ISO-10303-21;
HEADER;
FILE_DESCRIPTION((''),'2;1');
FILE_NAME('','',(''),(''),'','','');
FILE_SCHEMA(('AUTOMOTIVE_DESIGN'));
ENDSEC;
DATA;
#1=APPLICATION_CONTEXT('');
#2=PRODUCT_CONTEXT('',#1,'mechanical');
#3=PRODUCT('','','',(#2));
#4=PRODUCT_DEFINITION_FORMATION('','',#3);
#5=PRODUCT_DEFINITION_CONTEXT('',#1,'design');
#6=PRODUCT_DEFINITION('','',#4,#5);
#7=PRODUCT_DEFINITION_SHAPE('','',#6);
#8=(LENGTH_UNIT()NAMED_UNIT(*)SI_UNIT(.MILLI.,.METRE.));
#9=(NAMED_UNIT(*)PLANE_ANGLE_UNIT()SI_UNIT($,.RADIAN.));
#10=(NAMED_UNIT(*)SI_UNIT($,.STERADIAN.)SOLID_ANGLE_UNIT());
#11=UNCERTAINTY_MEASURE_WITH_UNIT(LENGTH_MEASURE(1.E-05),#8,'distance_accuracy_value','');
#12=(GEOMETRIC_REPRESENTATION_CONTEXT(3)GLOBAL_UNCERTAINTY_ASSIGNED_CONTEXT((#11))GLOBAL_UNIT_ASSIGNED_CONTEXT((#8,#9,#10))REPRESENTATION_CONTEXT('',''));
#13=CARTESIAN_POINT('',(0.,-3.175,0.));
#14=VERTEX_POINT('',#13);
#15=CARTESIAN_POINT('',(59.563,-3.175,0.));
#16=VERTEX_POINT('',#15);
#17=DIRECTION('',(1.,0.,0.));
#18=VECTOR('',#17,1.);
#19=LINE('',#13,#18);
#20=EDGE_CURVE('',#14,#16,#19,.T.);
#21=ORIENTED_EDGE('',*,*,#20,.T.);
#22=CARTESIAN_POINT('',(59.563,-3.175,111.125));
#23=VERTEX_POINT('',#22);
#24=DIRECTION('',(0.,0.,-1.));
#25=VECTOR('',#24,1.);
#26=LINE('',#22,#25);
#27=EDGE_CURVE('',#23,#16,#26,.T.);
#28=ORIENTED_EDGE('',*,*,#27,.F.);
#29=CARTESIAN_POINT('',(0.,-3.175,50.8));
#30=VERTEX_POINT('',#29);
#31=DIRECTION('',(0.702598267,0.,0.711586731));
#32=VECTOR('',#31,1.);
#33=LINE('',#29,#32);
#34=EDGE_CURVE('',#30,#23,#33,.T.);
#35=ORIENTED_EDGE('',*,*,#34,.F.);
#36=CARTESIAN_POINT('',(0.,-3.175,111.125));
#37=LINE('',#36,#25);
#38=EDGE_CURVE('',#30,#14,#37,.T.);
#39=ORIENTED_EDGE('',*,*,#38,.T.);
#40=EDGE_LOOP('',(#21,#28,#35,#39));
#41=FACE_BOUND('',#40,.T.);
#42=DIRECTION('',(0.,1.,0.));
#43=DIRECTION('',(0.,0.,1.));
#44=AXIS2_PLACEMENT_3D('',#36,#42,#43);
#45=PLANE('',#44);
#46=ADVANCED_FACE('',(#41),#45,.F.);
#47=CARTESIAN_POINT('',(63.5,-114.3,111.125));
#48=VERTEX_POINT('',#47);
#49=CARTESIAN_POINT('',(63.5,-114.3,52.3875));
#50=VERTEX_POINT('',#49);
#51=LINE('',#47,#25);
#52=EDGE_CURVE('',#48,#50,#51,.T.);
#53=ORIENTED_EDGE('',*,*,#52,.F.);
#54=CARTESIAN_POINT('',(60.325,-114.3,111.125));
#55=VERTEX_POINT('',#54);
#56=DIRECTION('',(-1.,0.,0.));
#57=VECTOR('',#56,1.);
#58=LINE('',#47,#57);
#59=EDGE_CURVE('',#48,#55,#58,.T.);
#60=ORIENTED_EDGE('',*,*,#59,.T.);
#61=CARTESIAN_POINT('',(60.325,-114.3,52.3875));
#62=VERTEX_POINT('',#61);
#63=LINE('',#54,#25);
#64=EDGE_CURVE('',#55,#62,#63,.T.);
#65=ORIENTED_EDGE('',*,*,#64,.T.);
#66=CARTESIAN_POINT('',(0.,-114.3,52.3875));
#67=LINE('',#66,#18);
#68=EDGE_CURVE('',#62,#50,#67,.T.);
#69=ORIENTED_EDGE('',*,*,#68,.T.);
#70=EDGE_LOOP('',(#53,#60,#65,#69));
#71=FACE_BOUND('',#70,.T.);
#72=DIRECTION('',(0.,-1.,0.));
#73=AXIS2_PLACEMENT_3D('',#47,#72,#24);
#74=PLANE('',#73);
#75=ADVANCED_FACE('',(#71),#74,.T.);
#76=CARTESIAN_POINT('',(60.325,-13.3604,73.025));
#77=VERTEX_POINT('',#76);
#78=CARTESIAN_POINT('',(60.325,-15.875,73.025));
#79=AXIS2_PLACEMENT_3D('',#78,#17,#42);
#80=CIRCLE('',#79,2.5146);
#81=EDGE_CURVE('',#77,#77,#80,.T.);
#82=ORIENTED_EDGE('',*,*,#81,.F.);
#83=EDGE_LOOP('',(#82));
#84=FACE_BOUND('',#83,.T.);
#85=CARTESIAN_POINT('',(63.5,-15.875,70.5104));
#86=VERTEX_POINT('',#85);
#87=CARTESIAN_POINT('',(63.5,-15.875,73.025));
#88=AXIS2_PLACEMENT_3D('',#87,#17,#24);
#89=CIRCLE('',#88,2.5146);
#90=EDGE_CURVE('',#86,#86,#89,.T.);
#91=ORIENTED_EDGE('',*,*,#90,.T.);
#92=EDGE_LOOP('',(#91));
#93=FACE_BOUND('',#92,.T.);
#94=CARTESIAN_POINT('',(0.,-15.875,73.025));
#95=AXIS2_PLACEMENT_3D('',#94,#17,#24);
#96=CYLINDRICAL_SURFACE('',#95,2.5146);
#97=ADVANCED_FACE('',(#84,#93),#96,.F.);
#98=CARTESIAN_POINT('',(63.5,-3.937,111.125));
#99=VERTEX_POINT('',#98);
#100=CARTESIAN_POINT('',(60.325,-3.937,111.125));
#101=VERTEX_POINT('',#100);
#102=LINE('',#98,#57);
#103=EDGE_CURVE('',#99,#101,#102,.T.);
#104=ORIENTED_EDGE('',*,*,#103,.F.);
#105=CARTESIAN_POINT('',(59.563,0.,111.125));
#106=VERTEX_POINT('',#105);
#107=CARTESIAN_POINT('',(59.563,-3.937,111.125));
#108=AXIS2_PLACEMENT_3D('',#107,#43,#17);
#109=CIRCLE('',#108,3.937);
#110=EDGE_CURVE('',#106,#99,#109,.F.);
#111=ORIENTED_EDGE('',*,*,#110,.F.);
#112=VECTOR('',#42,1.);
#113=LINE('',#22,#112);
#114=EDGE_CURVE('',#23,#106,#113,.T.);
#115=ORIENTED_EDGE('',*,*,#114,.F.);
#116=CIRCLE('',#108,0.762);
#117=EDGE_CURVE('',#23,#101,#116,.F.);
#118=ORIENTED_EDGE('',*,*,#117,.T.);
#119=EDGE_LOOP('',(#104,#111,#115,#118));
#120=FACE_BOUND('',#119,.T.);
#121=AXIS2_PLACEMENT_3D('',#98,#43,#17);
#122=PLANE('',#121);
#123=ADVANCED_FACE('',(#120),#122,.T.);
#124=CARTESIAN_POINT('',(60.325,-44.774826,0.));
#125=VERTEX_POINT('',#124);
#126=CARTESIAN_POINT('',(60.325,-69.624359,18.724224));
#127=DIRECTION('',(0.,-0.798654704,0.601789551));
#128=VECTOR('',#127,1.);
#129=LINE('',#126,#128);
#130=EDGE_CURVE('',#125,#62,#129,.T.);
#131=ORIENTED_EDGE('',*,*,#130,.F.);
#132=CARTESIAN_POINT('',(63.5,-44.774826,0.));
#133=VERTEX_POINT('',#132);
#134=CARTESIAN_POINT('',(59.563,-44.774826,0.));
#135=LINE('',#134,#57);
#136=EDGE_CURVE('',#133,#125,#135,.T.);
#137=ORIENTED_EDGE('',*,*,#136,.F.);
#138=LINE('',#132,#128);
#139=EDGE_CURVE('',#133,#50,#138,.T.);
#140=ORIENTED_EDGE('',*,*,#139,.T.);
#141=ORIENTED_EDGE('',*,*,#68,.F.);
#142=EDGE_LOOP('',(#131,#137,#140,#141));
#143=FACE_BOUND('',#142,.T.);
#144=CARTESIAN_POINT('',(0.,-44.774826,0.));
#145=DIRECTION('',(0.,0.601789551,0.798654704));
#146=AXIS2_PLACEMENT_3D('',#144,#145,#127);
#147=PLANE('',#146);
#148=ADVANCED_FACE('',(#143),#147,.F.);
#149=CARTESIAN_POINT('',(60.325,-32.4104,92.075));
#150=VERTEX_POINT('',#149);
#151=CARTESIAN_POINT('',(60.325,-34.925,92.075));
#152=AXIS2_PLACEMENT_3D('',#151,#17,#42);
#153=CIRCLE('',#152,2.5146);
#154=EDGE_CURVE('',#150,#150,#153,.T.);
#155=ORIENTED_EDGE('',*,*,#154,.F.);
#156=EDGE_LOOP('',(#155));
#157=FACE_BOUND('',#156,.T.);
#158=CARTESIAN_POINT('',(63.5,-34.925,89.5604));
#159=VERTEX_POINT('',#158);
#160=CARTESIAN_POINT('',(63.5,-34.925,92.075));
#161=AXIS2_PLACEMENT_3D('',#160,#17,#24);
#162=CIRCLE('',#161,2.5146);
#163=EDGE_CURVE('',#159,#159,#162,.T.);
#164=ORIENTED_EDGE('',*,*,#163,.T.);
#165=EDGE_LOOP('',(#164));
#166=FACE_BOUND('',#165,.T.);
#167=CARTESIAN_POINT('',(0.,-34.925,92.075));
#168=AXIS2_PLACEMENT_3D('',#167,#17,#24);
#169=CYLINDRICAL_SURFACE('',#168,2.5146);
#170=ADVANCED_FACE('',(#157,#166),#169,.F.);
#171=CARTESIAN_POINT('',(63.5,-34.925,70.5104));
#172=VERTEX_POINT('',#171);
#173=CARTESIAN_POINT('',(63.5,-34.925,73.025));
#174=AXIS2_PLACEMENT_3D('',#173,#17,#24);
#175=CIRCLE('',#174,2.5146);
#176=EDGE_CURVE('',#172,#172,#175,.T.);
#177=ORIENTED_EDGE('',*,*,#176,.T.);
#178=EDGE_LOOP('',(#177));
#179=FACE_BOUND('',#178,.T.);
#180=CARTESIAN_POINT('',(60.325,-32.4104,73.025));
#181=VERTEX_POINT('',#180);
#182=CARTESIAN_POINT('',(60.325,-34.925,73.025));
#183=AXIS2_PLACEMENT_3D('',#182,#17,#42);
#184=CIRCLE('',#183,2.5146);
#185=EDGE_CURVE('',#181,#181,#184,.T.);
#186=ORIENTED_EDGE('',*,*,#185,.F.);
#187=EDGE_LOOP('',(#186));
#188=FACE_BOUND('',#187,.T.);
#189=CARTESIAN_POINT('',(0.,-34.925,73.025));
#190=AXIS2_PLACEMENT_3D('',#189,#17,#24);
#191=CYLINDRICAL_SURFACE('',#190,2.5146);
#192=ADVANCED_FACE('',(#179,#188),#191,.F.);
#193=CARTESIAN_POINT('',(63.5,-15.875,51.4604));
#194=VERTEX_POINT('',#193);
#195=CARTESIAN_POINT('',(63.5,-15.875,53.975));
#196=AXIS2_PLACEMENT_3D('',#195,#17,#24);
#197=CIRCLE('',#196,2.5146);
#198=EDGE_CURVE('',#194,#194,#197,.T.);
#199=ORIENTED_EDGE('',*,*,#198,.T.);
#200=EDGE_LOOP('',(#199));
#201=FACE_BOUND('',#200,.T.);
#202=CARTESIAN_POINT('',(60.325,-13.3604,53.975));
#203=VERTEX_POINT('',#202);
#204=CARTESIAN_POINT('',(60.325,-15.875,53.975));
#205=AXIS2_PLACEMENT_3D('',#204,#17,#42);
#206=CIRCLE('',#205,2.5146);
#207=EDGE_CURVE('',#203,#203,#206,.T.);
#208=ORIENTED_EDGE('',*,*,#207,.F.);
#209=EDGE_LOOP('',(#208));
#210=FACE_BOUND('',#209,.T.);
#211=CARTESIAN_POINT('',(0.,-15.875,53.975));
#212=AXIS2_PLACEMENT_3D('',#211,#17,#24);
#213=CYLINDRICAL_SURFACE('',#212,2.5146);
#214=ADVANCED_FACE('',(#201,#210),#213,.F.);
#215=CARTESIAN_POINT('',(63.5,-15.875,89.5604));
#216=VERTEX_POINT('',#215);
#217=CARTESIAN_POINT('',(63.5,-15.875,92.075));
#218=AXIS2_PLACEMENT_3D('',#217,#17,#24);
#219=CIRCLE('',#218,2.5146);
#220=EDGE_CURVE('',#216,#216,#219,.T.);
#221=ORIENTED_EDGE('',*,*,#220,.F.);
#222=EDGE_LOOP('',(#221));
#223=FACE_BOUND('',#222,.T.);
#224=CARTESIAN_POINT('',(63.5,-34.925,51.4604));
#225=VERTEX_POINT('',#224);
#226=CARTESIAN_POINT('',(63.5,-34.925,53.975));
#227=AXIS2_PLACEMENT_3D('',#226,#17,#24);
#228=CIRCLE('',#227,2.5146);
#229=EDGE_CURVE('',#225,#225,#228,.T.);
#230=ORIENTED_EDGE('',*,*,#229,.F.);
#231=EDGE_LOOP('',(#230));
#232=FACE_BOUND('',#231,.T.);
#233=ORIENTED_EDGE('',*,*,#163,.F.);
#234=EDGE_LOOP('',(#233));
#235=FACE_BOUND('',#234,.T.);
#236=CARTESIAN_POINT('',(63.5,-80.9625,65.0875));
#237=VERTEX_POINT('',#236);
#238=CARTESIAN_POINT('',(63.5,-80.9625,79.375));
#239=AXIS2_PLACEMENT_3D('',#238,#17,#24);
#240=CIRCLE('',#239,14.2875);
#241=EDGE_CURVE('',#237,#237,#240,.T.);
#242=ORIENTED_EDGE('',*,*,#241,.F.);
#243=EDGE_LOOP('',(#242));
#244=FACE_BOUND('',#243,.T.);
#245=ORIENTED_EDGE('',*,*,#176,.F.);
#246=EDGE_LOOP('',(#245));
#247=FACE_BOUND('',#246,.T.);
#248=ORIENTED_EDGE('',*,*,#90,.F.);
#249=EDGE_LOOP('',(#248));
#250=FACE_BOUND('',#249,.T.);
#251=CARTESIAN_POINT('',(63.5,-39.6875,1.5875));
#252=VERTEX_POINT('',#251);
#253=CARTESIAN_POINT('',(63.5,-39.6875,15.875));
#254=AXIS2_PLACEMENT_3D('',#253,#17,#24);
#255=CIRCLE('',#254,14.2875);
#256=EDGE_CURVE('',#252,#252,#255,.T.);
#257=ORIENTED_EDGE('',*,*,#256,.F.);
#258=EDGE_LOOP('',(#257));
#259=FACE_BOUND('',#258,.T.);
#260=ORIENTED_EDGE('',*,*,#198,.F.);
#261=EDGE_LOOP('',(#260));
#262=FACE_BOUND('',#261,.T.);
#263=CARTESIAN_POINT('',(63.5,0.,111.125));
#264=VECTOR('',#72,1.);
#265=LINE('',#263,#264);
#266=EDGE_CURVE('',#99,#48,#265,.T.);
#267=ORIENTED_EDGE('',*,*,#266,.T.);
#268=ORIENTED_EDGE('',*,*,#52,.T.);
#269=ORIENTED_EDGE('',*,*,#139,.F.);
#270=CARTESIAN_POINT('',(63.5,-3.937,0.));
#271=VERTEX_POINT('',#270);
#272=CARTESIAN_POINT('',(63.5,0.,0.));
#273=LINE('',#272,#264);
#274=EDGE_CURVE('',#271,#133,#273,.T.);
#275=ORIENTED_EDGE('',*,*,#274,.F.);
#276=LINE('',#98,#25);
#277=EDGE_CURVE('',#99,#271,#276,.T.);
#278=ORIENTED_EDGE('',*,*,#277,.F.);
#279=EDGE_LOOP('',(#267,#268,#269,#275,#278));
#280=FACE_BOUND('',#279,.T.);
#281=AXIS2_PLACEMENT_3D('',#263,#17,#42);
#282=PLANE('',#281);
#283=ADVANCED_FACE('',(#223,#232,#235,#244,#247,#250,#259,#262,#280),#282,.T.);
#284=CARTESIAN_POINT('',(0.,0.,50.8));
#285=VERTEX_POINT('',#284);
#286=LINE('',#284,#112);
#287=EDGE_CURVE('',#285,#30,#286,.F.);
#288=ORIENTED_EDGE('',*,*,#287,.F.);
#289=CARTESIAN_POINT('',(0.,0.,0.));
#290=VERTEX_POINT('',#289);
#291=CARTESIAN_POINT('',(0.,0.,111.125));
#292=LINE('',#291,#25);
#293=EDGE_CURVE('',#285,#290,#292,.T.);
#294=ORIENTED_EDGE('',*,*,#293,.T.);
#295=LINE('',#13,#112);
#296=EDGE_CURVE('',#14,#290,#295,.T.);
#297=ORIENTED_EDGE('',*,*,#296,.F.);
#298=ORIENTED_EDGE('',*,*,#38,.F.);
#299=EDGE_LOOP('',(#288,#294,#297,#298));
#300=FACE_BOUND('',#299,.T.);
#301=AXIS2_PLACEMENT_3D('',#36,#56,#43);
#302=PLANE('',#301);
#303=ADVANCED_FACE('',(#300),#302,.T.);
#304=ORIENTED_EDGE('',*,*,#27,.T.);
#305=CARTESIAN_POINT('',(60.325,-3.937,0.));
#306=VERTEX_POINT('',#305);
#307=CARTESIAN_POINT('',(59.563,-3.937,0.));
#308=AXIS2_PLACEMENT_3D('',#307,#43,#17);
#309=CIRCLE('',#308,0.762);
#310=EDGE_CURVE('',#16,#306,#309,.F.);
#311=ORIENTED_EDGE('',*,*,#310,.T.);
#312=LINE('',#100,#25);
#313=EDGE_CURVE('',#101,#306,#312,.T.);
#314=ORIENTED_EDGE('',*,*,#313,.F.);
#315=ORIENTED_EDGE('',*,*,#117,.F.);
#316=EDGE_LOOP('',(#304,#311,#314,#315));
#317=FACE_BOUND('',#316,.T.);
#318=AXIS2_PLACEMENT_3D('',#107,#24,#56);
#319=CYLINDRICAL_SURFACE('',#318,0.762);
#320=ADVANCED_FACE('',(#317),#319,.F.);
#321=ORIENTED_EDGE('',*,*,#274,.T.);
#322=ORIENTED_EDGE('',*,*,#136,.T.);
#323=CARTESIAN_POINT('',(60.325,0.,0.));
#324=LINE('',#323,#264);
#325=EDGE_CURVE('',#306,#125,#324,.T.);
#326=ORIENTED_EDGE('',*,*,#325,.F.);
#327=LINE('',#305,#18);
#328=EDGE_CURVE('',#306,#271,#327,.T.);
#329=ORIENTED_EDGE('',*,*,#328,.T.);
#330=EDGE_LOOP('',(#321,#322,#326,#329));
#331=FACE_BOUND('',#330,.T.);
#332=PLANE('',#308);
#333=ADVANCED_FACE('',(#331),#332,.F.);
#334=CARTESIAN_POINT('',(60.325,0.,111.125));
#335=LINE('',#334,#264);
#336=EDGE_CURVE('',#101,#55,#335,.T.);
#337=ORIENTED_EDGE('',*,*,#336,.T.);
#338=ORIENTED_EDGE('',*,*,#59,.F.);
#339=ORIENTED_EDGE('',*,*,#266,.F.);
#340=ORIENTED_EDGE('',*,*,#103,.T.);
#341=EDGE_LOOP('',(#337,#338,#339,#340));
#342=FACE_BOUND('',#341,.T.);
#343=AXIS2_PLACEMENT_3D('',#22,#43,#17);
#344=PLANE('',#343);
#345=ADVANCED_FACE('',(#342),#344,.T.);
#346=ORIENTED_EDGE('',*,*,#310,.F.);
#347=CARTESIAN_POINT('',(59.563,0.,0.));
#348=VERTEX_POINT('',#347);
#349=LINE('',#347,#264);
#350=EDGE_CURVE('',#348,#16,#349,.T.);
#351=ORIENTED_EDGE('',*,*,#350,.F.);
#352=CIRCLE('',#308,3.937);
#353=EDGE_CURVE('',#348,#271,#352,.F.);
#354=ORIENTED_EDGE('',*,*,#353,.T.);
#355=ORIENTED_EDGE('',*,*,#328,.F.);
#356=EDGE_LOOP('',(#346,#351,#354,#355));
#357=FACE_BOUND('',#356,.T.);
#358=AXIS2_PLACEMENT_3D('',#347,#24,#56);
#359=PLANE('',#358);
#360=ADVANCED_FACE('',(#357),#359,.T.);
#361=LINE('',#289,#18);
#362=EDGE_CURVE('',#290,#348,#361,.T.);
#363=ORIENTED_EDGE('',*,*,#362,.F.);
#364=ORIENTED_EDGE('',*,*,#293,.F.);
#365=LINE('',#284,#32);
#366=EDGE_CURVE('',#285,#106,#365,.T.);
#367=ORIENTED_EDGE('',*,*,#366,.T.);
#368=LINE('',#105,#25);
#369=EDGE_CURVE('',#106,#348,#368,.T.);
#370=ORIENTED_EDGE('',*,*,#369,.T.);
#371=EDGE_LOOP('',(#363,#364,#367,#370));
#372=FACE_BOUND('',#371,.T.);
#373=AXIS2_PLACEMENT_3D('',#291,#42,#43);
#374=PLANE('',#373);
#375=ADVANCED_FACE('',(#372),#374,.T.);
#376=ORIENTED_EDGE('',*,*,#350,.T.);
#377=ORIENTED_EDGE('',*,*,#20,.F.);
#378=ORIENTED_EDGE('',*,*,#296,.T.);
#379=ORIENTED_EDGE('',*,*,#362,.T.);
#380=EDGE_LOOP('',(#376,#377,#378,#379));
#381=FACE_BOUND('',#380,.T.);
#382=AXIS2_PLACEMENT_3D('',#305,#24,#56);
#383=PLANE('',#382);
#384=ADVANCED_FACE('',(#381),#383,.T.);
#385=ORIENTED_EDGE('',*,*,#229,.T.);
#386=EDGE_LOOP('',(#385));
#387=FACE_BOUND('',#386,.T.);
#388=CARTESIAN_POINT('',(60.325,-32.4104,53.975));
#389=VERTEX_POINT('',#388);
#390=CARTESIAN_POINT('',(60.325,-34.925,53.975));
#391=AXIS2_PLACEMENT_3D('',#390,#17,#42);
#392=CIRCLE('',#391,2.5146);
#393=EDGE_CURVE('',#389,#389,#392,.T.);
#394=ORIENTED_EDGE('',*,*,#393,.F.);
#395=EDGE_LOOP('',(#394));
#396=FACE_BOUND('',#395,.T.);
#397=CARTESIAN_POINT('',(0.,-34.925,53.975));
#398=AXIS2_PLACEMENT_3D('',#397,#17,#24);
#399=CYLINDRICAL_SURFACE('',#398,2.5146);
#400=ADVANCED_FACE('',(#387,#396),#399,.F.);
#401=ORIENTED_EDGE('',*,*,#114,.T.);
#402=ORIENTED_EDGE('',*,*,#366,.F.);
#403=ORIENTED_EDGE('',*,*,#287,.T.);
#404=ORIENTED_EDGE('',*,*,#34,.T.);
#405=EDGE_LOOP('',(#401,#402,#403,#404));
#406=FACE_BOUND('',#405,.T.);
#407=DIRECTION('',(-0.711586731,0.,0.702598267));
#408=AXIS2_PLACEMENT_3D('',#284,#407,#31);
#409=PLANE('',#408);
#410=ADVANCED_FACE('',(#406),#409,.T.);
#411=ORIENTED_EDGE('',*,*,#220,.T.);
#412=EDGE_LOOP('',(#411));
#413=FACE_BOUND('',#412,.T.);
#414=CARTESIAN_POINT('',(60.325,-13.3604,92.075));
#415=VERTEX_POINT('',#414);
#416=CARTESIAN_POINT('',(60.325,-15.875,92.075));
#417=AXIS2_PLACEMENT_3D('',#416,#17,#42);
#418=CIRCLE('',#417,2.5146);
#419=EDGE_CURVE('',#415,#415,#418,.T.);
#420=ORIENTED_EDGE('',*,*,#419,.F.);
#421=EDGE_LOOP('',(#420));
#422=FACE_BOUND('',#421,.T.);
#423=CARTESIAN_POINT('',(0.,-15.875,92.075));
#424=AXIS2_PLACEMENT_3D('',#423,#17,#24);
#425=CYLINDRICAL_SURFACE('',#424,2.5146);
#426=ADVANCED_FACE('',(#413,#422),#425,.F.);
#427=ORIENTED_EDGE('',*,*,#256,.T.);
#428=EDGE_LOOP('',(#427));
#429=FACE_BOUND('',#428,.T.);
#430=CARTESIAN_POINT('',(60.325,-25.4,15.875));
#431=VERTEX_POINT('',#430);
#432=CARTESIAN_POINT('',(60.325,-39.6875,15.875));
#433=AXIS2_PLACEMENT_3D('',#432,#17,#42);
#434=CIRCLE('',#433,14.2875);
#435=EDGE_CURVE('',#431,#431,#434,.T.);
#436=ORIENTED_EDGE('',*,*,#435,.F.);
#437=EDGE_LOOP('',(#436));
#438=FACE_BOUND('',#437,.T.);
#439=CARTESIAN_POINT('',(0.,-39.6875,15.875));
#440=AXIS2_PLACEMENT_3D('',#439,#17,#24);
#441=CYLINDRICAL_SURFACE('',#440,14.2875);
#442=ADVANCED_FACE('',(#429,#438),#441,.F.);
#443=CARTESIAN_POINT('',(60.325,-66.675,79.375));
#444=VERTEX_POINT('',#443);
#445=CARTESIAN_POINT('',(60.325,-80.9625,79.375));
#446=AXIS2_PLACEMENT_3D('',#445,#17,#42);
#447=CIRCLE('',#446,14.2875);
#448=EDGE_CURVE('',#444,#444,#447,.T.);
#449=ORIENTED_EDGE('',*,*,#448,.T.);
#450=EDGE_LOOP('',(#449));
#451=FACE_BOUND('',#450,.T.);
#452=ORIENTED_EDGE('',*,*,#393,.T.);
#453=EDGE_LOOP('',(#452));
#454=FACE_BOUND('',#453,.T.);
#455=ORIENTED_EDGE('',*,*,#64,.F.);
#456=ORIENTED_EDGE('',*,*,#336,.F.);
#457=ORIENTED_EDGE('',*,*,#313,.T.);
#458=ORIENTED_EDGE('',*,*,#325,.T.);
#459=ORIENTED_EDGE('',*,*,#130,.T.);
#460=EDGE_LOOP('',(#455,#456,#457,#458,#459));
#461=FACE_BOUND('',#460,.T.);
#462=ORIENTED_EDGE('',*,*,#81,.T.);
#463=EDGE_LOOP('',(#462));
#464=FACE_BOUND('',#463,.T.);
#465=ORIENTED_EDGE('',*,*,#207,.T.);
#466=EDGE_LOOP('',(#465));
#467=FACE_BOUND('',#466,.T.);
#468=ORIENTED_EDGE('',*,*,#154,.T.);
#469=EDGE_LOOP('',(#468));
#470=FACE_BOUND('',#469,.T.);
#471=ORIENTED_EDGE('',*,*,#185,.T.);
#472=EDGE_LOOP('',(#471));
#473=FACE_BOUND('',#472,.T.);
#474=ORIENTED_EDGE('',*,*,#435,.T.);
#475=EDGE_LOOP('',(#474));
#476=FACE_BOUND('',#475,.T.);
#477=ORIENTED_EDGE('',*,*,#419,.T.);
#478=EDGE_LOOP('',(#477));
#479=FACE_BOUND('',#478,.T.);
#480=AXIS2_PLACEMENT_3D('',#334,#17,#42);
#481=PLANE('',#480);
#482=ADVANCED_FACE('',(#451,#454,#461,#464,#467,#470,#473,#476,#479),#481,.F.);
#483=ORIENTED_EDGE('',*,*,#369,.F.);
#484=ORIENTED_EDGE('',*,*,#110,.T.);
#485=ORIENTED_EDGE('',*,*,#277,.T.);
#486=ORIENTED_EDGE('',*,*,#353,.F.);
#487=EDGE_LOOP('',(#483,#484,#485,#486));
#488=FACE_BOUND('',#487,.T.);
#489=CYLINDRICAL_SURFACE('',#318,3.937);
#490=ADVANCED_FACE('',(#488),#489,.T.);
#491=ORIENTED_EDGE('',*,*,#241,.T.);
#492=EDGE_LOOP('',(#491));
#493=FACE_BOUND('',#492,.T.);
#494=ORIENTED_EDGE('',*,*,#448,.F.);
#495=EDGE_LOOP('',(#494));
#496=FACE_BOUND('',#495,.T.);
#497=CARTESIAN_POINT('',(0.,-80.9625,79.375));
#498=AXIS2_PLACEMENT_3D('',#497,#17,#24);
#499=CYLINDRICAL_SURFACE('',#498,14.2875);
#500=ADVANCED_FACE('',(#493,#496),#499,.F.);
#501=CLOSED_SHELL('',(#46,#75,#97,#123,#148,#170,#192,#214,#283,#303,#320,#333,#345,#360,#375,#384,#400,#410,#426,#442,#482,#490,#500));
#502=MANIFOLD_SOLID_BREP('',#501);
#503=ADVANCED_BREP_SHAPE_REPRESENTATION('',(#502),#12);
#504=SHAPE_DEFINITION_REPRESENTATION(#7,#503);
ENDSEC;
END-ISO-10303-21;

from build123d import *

# Parameters (mm, degrees)
BASE_FLANGE1_DEPTH      = 111.125
SKETCH16_R              = 14.2875
SKETCH16_R_2            = 2.5146
CUT_EXTRUDE1_DEPTH      = 172.596927784
CUT_EXTRUDE2_DEPTH      = 2.54
CUT_EXTRUDE2_DEPTH_BACK = 172.596927784


# Read off the part's stored shape, not the designer's step: Base-Flange1
with BuildPart() as part:
    # Base-Flange1 outline → Base-Flange1 (new body)
    with BuildSketch(Plane.XY):
        with BuildLine():
            Line((60.325, -3.937), (60.325, -114.3))
            Line((60.325, -114.3), (63.5, -114.3))
            Line((63.5, -114.3), (63.5, -3.937))
            ThreePointArc((63.5, -3.937), (62.346879398, -1.153120602), (59.563, 0))
            Line((59.563, 0), (0, 0))
            Line((0, 0), (0, -3.175))
            Line((0, -3.175), (59.563, -3.175))
            ThreePointArc((59.563, -3.175), (60.101815367, -3.398184633), (60.325, -3.937))
        make_face()
    extrude(amount=BASE_FLANGE1_DEPTH)

    # Sketch16 → Cut-Extrude1 (cut, through all)
    with BuildSketch(Plane(origin=(63.5, 0, 0), x_dir=(0, 0, -1), z_dir=(1, 0, 0))):
        with Locations((-79.375, -80.9625)):
            Circle(SKETCH16_R)
        with Locations((-15.875, -39.6875)):
            Circle(SKETCH16_R)
        with Locations((-53.975, -15.875)):
            Circle(SKETCH16_R_2)
        with Locations((-53.975, -34.925)):
            Circle(SKETCH16_R_2)
        with Locations((-73.025, -15.875)):
            Circle(SKETCH16_R_2)
        with Locations((-73.025, -34.925)):
            Circle(SKETCH16_R_2)
        with Locations((-92.075, -15.875)):
            Circle(SKETCH16_R_2)
        with Locations((-92.075, -34.925)):
            Circle(SKETCH16_R_2)
        Polygon((0, -44.774825848), (-52.3875, -114.3), (0, -114.3), align=None)
    extrude(amount=-CUT_EXTRUDE1_DEPTH, mode=Mode.SUBTRACT)

    # Sketch17 → Cut-Extrude2 (cut, two sides: drawn at the far end of the back side and taken through both)
    with BuildSketch(Plane(origin=(0, 0, 0), x_dir=(1, 0, 0), z_dir=(0, 1, 0)).offset(-CUT_EXTRUDE2_DEPTH_BACK)):
        Polygon((-184.195113126, 135.751553806), (0, -50.8), (59.563, -111.125), (243.758113126, -297.676553806), (-129.344994485, -666.066780058), (-557.298220737, -232.638672446), align=None)
    extrude(amount=CUT_EXTRUDE2_DEPTH + CUT_EXTRUDE2_DEPTH_BACK, mode=Mode.SUBTRACT)


solid = part.part
